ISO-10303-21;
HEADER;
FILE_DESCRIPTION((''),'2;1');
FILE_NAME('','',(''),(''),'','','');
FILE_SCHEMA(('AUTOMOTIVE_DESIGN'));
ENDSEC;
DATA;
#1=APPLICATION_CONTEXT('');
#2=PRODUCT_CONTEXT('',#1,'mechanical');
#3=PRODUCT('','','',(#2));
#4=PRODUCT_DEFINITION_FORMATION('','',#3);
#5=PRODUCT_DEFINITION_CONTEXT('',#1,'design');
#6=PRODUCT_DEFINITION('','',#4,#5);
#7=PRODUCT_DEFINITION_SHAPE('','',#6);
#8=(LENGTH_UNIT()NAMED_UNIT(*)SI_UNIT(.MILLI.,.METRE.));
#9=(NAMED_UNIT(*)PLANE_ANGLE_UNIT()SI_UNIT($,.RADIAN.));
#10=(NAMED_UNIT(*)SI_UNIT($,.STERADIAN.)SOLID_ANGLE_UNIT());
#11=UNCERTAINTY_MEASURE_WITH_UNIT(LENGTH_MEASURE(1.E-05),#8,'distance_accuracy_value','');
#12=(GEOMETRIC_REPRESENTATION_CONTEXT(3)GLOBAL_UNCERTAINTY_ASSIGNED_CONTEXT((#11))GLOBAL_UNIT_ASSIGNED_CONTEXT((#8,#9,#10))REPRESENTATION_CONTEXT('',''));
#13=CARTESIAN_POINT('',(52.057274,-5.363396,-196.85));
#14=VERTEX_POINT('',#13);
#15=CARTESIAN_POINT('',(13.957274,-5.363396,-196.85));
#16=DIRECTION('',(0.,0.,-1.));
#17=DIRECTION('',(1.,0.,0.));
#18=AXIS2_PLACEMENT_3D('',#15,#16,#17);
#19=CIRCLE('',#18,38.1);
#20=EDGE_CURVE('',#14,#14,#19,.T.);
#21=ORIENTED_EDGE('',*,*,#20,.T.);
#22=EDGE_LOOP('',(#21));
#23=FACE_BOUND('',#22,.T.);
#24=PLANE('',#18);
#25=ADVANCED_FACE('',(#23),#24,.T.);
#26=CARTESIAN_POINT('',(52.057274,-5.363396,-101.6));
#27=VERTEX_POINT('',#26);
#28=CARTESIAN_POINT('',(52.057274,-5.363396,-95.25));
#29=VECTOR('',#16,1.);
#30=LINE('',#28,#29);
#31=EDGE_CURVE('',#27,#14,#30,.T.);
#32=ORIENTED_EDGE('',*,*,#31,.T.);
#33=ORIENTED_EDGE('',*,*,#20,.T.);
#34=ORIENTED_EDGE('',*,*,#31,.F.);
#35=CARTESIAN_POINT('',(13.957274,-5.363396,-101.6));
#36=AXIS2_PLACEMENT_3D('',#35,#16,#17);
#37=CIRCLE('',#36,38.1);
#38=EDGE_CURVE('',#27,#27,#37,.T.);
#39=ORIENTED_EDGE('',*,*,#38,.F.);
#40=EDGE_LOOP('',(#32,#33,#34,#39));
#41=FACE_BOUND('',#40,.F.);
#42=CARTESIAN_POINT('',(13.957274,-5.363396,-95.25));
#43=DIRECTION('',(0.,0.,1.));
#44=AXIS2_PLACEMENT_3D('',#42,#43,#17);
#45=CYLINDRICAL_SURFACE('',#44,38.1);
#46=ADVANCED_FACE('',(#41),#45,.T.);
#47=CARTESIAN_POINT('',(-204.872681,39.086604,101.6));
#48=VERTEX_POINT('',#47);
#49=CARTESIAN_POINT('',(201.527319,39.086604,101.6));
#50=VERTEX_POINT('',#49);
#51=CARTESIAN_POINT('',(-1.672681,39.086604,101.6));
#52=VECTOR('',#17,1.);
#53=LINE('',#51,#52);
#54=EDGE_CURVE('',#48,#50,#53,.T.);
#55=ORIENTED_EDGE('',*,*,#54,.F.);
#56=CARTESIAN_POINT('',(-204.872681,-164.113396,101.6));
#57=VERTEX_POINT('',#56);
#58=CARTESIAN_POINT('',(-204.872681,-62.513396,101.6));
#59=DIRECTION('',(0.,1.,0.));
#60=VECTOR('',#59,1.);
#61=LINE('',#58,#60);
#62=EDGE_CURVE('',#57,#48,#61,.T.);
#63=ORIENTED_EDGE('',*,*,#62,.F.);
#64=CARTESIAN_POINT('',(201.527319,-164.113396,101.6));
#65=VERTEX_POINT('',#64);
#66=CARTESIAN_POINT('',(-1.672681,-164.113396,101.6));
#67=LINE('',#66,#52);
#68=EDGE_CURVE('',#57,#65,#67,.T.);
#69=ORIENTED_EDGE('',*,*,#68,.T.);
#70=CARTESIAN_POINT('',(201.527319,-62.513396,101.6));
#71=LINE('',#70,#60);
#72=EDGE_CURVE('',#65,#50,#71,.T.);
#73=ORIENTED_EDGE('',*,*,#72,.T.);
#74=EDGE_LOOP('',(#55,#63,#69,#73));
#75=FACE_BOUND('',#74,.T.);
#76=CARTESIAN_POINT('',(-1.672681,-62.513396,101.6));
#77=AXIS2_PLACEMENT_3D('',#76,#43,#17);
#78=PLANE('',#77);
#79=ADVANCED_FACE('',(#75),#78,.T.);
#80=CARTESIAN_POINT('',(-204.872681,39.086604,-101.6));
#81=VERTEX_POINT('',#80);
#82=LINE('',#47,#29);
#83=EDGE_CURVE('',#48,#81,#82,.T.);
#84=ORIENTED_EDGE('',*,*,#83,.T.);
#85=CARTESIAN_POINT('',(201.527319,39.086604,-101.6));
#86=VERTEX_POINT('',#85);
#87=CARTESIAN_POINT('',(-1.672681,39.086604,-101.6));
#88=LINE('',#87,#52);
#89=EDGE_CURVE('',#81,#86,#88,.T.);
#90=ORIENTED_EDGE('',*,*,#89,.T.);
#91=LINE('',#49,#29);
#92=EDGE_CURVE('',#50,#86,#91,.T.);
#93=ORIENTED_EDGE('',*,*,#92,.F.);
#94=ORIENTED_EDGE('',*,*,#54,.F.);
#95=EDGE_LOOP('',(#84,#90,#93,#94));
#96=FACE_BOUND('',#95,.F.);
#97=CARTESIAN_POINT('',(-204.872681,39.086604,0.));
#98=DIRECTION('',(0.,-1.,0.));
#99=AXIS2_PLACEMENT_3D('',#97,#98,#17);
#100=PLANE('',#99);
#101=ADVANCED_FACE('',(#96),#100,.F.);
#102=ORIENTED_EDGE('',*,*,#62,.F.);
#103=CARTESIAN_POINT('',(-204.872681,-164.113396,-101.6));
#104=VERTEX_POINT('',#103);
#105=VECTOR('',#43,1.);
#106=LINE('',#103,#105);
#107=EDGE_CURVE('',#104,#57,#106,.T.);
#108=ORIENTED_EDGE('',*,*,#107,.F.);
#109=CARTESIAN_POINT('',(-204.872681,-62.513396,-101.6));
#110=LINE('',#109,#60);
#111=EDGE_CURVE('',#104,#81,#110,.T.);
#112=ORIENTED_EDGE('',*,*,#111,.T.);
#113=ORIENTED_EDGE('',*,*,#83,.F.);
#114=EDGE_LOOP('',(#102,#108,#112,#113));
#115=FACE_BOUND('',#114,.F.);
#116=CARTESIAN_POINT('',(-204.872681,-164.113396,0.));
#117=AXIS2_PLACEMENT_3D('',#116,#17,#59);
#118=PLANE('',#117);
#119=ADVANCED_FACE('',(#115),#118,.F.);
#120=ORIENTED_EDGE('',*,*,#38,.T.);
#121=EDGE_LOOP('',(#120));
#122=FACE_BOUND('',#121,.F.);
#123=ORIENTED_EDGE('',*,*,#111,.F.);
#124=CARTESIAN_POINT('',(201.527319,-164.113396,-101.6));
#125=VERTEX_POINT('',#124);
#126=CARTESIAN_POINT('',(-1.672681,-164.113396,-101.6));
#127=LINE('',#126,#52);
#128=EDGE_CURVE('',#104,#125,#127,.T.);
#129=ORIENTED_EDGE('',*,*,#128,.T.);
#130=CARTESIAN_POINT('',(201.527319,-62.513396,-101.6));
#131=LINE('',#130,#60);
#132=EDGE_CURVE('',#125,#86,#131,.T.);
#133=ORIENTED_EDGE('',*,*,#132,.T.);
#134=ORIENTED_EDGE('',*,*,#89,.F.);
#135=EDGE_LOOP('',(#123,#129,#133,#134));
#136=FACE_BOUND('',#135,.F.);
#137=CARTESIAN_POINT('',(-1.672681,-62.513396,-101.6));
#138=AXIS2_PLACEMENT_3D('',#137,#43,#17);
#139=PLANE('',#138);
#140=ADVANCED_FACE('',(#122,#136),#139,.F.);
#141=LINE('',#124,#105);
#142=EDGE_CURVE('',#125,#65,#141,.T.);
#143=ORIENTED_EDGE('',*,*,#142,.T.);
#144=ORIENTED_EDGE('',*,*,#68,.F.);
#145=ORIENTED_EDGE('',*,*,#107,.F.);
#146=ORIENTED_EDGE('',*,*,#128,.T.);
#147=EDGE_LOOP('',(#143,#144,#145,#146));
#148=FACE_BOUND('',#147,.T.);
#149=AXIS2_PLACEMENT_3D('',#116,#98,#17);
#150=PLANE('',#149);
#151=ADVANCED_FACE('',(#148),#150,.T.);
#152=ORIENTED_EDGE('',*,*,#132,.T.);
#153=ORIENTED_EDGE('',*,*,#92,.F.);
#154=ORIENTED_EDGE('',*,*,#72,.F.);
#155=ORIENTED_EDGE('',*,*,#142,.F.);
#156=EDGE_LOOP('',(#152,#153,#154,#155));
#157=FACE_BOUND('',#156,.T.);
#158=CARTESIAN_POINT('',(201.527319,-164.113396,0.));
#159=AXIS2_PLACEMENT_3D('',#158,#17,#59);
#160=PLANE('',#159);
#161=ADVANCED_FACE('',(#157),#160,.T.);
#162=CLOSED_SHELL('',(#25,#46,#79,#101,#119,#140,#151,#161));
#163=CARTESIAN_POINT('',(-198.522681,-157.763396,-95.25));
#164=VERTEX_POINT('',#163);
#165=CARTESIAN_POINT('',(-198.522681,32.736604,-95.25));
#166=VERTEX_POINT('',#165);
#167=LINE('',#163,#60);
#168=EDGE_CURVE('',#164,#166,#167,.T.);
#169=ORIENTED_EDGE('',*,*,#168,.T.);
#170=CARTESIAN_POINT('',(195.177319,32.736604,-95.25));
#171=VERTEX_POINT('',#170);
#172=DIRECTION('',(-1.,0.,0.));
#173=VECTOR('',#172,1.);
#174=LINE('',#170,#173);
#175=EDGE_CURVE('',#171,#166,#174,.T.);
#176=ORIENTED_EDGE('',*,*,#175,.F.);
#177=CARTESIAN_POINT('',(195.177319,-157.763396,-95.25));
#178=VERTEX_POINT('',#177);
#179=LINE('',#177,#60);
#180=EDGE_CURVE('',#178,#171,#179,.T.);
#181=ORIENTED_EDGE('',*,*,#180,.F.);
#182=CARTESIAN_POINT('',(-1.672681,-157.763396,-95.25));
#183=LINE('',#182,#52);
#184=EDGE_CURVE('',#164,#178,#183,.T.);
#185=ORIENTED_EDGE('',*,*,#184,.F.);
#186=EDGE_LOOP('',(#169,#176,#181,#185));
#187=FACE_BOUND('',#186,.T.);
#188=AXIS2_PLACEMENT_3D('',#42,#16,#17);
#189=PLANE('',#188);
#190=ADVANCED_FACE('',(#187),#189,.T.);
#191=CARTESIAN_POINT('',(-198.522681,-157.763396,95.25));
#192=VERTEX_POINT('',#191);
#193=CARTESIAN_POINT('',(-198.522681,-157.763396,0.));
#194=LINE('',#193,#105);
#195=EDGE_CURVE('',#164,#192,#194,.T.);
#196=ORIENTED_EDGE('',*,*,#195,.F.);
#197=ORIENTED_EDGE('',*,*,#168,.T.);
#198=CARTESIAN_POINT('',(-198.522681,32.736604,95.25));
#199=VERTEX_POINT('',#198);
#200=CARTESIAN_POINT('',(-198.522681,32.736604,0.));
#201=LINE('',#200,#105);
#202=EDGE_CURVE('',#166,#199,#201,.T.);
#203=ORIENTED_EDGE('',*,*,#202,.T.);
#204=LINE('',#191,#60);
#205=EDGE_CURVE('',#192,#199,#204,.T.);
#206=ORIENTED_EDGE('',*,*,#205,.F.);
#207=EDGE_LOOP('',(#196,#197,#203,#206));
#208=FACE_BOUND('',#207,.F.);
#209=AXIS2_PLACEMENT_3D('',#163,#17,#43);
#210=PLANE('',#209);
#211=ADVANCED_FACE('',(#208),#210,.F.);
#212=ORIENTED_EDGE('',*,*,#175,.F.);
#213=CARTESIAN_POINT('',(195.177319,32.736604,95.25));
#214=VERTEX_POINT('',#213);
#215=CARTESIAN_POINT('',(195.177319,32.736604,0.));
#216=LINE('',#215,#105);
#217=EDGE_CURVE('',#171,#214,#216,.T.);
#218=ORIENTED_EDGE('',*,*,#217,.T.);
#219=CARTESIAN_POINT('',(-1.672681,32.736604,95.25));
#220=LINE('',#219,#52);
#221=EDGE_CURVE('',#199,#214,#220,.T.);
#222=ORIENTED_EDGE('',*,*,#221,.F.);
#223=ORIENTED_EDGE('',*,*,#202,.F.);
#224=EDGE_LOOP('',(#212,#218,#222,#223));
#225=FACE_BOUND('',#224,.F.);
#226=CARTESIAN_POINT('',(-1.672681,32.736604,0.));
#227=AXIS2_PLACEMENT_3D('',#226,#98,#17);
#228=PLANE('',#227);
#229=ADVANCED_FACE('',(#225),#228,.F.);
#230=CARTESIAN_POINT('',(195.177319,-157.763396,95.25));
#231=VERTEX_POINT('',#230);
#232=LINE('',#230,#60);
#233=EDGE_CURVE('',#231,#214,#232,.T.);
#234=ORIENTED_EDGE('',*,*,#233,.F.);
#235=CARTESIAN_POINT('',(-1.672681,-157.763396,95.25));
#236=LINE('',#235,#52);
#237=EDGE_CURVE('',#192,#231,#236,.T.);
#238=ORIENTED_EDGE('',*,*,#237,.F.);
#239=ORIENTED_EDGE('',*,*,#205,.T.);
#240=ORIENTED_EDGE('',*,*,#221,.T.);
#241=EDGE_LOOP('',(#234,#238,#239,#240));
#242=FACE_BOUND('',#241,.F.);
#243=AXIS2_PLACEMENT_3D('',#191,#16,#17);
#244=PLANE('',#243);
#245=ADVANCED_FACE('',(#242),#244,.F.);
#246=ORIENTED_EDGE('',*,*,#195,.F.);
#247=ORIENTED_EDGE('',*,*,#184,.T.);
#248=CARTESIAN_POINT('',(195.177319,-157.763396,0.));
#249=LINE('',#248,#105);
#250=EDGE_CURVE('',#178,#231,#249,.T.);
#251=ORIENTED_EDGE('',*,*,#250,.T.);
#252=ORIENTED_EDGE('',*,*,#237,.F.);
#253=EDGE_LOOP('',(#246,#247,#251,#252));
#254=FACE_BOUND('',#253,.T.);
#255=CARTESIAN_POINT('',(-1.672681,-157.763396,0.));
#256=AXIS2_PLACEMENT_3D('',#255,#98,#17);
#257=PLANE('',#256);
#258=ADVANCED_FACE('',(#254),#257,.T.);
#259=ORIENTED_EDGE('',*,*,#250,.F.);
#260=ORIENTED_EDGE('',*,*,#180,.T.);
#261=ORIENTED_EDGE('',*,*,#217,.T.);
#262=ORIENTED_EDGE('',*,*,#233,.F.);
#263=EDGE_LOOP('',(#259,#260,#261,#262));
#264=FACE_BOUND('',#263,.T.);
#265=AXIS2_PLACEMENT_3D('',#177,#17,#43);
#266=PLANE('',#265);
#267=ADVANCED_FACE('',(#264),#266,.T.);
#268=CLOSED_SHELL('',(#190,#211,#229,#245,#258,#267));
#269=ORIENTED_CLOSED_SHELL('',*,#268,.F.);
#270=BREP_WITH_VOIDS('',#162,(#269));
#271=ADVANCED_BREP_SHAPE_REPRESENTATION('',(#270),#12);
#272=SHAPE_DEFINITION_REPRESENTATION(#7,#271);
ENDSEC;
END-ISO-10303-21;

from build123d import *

# Parameters (mm, degrees)
F0_W      = 406.4
F0_H      = 203.2
F1_DEPTH  = 101.6
F4_W      = 393.7
F4_H      = 190.5
F5_DEPTH  = 190.5
F6_R      = 38.1
F7_DEPTH  = 6.35
F10_DEPTH = 101.6


# Not quite as in the source:
# - the program builds the solid bodies; features that only make, move or delete a surface that nothing else refers to are left out


with BuildPart() as f1:
    # F0 (on Top) → F1 (new body, symmetric)
    with BuildSketch(Plane.XY):
        with Locations((-1.672681421, -62.5133958211)):
            Rectangle(F0_W, F0_H)
    extrude(amount=F1_DEPTH, both=True)

    # F4 (on offset) → F5 (cut)
    with BuildSketch(Plane.XZ.offset(157.7633958211)):
        with Locations((-1.672681421, 0)):
            Rectangle(F4_W, F4_H)
    extrude(amount=-F5_DEPTH, mode=Mode.SUBTRACT)

    # F6 (on face) → F7 (cut, through all)
    with BuildSketch(Plane(origin=(0, 0, -101.6), x_dir=(1, 0, 0), z_dir=(0, 0, -1))):
        with Locations((13.9572741464, 5.3633958211)):
            Circle(F6_R)
    extrude(amount=-F7_DEPTH, mode=Mode.SUBTRACT)

    # F9 (on offset) → F10 (join)
    with BuildSketch(Plane(origin=(0, 0, -95.25), x_dir=(1, 0, 0), z_dir=(0, 0, -1))):
        with BuildLine():
            ThreePointArc((13.9572742307, -32.7366041789), (40.8980425394, -21.5773725123), (52.0572741464, 5.3633958211))
            ThreePointArc((52.0572741464, 5.3633958211), (-12.9834942466, 32.3041641545), (13.9572742307, -32.7366041789))
        make_face()
    extrude(amount=F10_DEPTH)


solid = f1.part
